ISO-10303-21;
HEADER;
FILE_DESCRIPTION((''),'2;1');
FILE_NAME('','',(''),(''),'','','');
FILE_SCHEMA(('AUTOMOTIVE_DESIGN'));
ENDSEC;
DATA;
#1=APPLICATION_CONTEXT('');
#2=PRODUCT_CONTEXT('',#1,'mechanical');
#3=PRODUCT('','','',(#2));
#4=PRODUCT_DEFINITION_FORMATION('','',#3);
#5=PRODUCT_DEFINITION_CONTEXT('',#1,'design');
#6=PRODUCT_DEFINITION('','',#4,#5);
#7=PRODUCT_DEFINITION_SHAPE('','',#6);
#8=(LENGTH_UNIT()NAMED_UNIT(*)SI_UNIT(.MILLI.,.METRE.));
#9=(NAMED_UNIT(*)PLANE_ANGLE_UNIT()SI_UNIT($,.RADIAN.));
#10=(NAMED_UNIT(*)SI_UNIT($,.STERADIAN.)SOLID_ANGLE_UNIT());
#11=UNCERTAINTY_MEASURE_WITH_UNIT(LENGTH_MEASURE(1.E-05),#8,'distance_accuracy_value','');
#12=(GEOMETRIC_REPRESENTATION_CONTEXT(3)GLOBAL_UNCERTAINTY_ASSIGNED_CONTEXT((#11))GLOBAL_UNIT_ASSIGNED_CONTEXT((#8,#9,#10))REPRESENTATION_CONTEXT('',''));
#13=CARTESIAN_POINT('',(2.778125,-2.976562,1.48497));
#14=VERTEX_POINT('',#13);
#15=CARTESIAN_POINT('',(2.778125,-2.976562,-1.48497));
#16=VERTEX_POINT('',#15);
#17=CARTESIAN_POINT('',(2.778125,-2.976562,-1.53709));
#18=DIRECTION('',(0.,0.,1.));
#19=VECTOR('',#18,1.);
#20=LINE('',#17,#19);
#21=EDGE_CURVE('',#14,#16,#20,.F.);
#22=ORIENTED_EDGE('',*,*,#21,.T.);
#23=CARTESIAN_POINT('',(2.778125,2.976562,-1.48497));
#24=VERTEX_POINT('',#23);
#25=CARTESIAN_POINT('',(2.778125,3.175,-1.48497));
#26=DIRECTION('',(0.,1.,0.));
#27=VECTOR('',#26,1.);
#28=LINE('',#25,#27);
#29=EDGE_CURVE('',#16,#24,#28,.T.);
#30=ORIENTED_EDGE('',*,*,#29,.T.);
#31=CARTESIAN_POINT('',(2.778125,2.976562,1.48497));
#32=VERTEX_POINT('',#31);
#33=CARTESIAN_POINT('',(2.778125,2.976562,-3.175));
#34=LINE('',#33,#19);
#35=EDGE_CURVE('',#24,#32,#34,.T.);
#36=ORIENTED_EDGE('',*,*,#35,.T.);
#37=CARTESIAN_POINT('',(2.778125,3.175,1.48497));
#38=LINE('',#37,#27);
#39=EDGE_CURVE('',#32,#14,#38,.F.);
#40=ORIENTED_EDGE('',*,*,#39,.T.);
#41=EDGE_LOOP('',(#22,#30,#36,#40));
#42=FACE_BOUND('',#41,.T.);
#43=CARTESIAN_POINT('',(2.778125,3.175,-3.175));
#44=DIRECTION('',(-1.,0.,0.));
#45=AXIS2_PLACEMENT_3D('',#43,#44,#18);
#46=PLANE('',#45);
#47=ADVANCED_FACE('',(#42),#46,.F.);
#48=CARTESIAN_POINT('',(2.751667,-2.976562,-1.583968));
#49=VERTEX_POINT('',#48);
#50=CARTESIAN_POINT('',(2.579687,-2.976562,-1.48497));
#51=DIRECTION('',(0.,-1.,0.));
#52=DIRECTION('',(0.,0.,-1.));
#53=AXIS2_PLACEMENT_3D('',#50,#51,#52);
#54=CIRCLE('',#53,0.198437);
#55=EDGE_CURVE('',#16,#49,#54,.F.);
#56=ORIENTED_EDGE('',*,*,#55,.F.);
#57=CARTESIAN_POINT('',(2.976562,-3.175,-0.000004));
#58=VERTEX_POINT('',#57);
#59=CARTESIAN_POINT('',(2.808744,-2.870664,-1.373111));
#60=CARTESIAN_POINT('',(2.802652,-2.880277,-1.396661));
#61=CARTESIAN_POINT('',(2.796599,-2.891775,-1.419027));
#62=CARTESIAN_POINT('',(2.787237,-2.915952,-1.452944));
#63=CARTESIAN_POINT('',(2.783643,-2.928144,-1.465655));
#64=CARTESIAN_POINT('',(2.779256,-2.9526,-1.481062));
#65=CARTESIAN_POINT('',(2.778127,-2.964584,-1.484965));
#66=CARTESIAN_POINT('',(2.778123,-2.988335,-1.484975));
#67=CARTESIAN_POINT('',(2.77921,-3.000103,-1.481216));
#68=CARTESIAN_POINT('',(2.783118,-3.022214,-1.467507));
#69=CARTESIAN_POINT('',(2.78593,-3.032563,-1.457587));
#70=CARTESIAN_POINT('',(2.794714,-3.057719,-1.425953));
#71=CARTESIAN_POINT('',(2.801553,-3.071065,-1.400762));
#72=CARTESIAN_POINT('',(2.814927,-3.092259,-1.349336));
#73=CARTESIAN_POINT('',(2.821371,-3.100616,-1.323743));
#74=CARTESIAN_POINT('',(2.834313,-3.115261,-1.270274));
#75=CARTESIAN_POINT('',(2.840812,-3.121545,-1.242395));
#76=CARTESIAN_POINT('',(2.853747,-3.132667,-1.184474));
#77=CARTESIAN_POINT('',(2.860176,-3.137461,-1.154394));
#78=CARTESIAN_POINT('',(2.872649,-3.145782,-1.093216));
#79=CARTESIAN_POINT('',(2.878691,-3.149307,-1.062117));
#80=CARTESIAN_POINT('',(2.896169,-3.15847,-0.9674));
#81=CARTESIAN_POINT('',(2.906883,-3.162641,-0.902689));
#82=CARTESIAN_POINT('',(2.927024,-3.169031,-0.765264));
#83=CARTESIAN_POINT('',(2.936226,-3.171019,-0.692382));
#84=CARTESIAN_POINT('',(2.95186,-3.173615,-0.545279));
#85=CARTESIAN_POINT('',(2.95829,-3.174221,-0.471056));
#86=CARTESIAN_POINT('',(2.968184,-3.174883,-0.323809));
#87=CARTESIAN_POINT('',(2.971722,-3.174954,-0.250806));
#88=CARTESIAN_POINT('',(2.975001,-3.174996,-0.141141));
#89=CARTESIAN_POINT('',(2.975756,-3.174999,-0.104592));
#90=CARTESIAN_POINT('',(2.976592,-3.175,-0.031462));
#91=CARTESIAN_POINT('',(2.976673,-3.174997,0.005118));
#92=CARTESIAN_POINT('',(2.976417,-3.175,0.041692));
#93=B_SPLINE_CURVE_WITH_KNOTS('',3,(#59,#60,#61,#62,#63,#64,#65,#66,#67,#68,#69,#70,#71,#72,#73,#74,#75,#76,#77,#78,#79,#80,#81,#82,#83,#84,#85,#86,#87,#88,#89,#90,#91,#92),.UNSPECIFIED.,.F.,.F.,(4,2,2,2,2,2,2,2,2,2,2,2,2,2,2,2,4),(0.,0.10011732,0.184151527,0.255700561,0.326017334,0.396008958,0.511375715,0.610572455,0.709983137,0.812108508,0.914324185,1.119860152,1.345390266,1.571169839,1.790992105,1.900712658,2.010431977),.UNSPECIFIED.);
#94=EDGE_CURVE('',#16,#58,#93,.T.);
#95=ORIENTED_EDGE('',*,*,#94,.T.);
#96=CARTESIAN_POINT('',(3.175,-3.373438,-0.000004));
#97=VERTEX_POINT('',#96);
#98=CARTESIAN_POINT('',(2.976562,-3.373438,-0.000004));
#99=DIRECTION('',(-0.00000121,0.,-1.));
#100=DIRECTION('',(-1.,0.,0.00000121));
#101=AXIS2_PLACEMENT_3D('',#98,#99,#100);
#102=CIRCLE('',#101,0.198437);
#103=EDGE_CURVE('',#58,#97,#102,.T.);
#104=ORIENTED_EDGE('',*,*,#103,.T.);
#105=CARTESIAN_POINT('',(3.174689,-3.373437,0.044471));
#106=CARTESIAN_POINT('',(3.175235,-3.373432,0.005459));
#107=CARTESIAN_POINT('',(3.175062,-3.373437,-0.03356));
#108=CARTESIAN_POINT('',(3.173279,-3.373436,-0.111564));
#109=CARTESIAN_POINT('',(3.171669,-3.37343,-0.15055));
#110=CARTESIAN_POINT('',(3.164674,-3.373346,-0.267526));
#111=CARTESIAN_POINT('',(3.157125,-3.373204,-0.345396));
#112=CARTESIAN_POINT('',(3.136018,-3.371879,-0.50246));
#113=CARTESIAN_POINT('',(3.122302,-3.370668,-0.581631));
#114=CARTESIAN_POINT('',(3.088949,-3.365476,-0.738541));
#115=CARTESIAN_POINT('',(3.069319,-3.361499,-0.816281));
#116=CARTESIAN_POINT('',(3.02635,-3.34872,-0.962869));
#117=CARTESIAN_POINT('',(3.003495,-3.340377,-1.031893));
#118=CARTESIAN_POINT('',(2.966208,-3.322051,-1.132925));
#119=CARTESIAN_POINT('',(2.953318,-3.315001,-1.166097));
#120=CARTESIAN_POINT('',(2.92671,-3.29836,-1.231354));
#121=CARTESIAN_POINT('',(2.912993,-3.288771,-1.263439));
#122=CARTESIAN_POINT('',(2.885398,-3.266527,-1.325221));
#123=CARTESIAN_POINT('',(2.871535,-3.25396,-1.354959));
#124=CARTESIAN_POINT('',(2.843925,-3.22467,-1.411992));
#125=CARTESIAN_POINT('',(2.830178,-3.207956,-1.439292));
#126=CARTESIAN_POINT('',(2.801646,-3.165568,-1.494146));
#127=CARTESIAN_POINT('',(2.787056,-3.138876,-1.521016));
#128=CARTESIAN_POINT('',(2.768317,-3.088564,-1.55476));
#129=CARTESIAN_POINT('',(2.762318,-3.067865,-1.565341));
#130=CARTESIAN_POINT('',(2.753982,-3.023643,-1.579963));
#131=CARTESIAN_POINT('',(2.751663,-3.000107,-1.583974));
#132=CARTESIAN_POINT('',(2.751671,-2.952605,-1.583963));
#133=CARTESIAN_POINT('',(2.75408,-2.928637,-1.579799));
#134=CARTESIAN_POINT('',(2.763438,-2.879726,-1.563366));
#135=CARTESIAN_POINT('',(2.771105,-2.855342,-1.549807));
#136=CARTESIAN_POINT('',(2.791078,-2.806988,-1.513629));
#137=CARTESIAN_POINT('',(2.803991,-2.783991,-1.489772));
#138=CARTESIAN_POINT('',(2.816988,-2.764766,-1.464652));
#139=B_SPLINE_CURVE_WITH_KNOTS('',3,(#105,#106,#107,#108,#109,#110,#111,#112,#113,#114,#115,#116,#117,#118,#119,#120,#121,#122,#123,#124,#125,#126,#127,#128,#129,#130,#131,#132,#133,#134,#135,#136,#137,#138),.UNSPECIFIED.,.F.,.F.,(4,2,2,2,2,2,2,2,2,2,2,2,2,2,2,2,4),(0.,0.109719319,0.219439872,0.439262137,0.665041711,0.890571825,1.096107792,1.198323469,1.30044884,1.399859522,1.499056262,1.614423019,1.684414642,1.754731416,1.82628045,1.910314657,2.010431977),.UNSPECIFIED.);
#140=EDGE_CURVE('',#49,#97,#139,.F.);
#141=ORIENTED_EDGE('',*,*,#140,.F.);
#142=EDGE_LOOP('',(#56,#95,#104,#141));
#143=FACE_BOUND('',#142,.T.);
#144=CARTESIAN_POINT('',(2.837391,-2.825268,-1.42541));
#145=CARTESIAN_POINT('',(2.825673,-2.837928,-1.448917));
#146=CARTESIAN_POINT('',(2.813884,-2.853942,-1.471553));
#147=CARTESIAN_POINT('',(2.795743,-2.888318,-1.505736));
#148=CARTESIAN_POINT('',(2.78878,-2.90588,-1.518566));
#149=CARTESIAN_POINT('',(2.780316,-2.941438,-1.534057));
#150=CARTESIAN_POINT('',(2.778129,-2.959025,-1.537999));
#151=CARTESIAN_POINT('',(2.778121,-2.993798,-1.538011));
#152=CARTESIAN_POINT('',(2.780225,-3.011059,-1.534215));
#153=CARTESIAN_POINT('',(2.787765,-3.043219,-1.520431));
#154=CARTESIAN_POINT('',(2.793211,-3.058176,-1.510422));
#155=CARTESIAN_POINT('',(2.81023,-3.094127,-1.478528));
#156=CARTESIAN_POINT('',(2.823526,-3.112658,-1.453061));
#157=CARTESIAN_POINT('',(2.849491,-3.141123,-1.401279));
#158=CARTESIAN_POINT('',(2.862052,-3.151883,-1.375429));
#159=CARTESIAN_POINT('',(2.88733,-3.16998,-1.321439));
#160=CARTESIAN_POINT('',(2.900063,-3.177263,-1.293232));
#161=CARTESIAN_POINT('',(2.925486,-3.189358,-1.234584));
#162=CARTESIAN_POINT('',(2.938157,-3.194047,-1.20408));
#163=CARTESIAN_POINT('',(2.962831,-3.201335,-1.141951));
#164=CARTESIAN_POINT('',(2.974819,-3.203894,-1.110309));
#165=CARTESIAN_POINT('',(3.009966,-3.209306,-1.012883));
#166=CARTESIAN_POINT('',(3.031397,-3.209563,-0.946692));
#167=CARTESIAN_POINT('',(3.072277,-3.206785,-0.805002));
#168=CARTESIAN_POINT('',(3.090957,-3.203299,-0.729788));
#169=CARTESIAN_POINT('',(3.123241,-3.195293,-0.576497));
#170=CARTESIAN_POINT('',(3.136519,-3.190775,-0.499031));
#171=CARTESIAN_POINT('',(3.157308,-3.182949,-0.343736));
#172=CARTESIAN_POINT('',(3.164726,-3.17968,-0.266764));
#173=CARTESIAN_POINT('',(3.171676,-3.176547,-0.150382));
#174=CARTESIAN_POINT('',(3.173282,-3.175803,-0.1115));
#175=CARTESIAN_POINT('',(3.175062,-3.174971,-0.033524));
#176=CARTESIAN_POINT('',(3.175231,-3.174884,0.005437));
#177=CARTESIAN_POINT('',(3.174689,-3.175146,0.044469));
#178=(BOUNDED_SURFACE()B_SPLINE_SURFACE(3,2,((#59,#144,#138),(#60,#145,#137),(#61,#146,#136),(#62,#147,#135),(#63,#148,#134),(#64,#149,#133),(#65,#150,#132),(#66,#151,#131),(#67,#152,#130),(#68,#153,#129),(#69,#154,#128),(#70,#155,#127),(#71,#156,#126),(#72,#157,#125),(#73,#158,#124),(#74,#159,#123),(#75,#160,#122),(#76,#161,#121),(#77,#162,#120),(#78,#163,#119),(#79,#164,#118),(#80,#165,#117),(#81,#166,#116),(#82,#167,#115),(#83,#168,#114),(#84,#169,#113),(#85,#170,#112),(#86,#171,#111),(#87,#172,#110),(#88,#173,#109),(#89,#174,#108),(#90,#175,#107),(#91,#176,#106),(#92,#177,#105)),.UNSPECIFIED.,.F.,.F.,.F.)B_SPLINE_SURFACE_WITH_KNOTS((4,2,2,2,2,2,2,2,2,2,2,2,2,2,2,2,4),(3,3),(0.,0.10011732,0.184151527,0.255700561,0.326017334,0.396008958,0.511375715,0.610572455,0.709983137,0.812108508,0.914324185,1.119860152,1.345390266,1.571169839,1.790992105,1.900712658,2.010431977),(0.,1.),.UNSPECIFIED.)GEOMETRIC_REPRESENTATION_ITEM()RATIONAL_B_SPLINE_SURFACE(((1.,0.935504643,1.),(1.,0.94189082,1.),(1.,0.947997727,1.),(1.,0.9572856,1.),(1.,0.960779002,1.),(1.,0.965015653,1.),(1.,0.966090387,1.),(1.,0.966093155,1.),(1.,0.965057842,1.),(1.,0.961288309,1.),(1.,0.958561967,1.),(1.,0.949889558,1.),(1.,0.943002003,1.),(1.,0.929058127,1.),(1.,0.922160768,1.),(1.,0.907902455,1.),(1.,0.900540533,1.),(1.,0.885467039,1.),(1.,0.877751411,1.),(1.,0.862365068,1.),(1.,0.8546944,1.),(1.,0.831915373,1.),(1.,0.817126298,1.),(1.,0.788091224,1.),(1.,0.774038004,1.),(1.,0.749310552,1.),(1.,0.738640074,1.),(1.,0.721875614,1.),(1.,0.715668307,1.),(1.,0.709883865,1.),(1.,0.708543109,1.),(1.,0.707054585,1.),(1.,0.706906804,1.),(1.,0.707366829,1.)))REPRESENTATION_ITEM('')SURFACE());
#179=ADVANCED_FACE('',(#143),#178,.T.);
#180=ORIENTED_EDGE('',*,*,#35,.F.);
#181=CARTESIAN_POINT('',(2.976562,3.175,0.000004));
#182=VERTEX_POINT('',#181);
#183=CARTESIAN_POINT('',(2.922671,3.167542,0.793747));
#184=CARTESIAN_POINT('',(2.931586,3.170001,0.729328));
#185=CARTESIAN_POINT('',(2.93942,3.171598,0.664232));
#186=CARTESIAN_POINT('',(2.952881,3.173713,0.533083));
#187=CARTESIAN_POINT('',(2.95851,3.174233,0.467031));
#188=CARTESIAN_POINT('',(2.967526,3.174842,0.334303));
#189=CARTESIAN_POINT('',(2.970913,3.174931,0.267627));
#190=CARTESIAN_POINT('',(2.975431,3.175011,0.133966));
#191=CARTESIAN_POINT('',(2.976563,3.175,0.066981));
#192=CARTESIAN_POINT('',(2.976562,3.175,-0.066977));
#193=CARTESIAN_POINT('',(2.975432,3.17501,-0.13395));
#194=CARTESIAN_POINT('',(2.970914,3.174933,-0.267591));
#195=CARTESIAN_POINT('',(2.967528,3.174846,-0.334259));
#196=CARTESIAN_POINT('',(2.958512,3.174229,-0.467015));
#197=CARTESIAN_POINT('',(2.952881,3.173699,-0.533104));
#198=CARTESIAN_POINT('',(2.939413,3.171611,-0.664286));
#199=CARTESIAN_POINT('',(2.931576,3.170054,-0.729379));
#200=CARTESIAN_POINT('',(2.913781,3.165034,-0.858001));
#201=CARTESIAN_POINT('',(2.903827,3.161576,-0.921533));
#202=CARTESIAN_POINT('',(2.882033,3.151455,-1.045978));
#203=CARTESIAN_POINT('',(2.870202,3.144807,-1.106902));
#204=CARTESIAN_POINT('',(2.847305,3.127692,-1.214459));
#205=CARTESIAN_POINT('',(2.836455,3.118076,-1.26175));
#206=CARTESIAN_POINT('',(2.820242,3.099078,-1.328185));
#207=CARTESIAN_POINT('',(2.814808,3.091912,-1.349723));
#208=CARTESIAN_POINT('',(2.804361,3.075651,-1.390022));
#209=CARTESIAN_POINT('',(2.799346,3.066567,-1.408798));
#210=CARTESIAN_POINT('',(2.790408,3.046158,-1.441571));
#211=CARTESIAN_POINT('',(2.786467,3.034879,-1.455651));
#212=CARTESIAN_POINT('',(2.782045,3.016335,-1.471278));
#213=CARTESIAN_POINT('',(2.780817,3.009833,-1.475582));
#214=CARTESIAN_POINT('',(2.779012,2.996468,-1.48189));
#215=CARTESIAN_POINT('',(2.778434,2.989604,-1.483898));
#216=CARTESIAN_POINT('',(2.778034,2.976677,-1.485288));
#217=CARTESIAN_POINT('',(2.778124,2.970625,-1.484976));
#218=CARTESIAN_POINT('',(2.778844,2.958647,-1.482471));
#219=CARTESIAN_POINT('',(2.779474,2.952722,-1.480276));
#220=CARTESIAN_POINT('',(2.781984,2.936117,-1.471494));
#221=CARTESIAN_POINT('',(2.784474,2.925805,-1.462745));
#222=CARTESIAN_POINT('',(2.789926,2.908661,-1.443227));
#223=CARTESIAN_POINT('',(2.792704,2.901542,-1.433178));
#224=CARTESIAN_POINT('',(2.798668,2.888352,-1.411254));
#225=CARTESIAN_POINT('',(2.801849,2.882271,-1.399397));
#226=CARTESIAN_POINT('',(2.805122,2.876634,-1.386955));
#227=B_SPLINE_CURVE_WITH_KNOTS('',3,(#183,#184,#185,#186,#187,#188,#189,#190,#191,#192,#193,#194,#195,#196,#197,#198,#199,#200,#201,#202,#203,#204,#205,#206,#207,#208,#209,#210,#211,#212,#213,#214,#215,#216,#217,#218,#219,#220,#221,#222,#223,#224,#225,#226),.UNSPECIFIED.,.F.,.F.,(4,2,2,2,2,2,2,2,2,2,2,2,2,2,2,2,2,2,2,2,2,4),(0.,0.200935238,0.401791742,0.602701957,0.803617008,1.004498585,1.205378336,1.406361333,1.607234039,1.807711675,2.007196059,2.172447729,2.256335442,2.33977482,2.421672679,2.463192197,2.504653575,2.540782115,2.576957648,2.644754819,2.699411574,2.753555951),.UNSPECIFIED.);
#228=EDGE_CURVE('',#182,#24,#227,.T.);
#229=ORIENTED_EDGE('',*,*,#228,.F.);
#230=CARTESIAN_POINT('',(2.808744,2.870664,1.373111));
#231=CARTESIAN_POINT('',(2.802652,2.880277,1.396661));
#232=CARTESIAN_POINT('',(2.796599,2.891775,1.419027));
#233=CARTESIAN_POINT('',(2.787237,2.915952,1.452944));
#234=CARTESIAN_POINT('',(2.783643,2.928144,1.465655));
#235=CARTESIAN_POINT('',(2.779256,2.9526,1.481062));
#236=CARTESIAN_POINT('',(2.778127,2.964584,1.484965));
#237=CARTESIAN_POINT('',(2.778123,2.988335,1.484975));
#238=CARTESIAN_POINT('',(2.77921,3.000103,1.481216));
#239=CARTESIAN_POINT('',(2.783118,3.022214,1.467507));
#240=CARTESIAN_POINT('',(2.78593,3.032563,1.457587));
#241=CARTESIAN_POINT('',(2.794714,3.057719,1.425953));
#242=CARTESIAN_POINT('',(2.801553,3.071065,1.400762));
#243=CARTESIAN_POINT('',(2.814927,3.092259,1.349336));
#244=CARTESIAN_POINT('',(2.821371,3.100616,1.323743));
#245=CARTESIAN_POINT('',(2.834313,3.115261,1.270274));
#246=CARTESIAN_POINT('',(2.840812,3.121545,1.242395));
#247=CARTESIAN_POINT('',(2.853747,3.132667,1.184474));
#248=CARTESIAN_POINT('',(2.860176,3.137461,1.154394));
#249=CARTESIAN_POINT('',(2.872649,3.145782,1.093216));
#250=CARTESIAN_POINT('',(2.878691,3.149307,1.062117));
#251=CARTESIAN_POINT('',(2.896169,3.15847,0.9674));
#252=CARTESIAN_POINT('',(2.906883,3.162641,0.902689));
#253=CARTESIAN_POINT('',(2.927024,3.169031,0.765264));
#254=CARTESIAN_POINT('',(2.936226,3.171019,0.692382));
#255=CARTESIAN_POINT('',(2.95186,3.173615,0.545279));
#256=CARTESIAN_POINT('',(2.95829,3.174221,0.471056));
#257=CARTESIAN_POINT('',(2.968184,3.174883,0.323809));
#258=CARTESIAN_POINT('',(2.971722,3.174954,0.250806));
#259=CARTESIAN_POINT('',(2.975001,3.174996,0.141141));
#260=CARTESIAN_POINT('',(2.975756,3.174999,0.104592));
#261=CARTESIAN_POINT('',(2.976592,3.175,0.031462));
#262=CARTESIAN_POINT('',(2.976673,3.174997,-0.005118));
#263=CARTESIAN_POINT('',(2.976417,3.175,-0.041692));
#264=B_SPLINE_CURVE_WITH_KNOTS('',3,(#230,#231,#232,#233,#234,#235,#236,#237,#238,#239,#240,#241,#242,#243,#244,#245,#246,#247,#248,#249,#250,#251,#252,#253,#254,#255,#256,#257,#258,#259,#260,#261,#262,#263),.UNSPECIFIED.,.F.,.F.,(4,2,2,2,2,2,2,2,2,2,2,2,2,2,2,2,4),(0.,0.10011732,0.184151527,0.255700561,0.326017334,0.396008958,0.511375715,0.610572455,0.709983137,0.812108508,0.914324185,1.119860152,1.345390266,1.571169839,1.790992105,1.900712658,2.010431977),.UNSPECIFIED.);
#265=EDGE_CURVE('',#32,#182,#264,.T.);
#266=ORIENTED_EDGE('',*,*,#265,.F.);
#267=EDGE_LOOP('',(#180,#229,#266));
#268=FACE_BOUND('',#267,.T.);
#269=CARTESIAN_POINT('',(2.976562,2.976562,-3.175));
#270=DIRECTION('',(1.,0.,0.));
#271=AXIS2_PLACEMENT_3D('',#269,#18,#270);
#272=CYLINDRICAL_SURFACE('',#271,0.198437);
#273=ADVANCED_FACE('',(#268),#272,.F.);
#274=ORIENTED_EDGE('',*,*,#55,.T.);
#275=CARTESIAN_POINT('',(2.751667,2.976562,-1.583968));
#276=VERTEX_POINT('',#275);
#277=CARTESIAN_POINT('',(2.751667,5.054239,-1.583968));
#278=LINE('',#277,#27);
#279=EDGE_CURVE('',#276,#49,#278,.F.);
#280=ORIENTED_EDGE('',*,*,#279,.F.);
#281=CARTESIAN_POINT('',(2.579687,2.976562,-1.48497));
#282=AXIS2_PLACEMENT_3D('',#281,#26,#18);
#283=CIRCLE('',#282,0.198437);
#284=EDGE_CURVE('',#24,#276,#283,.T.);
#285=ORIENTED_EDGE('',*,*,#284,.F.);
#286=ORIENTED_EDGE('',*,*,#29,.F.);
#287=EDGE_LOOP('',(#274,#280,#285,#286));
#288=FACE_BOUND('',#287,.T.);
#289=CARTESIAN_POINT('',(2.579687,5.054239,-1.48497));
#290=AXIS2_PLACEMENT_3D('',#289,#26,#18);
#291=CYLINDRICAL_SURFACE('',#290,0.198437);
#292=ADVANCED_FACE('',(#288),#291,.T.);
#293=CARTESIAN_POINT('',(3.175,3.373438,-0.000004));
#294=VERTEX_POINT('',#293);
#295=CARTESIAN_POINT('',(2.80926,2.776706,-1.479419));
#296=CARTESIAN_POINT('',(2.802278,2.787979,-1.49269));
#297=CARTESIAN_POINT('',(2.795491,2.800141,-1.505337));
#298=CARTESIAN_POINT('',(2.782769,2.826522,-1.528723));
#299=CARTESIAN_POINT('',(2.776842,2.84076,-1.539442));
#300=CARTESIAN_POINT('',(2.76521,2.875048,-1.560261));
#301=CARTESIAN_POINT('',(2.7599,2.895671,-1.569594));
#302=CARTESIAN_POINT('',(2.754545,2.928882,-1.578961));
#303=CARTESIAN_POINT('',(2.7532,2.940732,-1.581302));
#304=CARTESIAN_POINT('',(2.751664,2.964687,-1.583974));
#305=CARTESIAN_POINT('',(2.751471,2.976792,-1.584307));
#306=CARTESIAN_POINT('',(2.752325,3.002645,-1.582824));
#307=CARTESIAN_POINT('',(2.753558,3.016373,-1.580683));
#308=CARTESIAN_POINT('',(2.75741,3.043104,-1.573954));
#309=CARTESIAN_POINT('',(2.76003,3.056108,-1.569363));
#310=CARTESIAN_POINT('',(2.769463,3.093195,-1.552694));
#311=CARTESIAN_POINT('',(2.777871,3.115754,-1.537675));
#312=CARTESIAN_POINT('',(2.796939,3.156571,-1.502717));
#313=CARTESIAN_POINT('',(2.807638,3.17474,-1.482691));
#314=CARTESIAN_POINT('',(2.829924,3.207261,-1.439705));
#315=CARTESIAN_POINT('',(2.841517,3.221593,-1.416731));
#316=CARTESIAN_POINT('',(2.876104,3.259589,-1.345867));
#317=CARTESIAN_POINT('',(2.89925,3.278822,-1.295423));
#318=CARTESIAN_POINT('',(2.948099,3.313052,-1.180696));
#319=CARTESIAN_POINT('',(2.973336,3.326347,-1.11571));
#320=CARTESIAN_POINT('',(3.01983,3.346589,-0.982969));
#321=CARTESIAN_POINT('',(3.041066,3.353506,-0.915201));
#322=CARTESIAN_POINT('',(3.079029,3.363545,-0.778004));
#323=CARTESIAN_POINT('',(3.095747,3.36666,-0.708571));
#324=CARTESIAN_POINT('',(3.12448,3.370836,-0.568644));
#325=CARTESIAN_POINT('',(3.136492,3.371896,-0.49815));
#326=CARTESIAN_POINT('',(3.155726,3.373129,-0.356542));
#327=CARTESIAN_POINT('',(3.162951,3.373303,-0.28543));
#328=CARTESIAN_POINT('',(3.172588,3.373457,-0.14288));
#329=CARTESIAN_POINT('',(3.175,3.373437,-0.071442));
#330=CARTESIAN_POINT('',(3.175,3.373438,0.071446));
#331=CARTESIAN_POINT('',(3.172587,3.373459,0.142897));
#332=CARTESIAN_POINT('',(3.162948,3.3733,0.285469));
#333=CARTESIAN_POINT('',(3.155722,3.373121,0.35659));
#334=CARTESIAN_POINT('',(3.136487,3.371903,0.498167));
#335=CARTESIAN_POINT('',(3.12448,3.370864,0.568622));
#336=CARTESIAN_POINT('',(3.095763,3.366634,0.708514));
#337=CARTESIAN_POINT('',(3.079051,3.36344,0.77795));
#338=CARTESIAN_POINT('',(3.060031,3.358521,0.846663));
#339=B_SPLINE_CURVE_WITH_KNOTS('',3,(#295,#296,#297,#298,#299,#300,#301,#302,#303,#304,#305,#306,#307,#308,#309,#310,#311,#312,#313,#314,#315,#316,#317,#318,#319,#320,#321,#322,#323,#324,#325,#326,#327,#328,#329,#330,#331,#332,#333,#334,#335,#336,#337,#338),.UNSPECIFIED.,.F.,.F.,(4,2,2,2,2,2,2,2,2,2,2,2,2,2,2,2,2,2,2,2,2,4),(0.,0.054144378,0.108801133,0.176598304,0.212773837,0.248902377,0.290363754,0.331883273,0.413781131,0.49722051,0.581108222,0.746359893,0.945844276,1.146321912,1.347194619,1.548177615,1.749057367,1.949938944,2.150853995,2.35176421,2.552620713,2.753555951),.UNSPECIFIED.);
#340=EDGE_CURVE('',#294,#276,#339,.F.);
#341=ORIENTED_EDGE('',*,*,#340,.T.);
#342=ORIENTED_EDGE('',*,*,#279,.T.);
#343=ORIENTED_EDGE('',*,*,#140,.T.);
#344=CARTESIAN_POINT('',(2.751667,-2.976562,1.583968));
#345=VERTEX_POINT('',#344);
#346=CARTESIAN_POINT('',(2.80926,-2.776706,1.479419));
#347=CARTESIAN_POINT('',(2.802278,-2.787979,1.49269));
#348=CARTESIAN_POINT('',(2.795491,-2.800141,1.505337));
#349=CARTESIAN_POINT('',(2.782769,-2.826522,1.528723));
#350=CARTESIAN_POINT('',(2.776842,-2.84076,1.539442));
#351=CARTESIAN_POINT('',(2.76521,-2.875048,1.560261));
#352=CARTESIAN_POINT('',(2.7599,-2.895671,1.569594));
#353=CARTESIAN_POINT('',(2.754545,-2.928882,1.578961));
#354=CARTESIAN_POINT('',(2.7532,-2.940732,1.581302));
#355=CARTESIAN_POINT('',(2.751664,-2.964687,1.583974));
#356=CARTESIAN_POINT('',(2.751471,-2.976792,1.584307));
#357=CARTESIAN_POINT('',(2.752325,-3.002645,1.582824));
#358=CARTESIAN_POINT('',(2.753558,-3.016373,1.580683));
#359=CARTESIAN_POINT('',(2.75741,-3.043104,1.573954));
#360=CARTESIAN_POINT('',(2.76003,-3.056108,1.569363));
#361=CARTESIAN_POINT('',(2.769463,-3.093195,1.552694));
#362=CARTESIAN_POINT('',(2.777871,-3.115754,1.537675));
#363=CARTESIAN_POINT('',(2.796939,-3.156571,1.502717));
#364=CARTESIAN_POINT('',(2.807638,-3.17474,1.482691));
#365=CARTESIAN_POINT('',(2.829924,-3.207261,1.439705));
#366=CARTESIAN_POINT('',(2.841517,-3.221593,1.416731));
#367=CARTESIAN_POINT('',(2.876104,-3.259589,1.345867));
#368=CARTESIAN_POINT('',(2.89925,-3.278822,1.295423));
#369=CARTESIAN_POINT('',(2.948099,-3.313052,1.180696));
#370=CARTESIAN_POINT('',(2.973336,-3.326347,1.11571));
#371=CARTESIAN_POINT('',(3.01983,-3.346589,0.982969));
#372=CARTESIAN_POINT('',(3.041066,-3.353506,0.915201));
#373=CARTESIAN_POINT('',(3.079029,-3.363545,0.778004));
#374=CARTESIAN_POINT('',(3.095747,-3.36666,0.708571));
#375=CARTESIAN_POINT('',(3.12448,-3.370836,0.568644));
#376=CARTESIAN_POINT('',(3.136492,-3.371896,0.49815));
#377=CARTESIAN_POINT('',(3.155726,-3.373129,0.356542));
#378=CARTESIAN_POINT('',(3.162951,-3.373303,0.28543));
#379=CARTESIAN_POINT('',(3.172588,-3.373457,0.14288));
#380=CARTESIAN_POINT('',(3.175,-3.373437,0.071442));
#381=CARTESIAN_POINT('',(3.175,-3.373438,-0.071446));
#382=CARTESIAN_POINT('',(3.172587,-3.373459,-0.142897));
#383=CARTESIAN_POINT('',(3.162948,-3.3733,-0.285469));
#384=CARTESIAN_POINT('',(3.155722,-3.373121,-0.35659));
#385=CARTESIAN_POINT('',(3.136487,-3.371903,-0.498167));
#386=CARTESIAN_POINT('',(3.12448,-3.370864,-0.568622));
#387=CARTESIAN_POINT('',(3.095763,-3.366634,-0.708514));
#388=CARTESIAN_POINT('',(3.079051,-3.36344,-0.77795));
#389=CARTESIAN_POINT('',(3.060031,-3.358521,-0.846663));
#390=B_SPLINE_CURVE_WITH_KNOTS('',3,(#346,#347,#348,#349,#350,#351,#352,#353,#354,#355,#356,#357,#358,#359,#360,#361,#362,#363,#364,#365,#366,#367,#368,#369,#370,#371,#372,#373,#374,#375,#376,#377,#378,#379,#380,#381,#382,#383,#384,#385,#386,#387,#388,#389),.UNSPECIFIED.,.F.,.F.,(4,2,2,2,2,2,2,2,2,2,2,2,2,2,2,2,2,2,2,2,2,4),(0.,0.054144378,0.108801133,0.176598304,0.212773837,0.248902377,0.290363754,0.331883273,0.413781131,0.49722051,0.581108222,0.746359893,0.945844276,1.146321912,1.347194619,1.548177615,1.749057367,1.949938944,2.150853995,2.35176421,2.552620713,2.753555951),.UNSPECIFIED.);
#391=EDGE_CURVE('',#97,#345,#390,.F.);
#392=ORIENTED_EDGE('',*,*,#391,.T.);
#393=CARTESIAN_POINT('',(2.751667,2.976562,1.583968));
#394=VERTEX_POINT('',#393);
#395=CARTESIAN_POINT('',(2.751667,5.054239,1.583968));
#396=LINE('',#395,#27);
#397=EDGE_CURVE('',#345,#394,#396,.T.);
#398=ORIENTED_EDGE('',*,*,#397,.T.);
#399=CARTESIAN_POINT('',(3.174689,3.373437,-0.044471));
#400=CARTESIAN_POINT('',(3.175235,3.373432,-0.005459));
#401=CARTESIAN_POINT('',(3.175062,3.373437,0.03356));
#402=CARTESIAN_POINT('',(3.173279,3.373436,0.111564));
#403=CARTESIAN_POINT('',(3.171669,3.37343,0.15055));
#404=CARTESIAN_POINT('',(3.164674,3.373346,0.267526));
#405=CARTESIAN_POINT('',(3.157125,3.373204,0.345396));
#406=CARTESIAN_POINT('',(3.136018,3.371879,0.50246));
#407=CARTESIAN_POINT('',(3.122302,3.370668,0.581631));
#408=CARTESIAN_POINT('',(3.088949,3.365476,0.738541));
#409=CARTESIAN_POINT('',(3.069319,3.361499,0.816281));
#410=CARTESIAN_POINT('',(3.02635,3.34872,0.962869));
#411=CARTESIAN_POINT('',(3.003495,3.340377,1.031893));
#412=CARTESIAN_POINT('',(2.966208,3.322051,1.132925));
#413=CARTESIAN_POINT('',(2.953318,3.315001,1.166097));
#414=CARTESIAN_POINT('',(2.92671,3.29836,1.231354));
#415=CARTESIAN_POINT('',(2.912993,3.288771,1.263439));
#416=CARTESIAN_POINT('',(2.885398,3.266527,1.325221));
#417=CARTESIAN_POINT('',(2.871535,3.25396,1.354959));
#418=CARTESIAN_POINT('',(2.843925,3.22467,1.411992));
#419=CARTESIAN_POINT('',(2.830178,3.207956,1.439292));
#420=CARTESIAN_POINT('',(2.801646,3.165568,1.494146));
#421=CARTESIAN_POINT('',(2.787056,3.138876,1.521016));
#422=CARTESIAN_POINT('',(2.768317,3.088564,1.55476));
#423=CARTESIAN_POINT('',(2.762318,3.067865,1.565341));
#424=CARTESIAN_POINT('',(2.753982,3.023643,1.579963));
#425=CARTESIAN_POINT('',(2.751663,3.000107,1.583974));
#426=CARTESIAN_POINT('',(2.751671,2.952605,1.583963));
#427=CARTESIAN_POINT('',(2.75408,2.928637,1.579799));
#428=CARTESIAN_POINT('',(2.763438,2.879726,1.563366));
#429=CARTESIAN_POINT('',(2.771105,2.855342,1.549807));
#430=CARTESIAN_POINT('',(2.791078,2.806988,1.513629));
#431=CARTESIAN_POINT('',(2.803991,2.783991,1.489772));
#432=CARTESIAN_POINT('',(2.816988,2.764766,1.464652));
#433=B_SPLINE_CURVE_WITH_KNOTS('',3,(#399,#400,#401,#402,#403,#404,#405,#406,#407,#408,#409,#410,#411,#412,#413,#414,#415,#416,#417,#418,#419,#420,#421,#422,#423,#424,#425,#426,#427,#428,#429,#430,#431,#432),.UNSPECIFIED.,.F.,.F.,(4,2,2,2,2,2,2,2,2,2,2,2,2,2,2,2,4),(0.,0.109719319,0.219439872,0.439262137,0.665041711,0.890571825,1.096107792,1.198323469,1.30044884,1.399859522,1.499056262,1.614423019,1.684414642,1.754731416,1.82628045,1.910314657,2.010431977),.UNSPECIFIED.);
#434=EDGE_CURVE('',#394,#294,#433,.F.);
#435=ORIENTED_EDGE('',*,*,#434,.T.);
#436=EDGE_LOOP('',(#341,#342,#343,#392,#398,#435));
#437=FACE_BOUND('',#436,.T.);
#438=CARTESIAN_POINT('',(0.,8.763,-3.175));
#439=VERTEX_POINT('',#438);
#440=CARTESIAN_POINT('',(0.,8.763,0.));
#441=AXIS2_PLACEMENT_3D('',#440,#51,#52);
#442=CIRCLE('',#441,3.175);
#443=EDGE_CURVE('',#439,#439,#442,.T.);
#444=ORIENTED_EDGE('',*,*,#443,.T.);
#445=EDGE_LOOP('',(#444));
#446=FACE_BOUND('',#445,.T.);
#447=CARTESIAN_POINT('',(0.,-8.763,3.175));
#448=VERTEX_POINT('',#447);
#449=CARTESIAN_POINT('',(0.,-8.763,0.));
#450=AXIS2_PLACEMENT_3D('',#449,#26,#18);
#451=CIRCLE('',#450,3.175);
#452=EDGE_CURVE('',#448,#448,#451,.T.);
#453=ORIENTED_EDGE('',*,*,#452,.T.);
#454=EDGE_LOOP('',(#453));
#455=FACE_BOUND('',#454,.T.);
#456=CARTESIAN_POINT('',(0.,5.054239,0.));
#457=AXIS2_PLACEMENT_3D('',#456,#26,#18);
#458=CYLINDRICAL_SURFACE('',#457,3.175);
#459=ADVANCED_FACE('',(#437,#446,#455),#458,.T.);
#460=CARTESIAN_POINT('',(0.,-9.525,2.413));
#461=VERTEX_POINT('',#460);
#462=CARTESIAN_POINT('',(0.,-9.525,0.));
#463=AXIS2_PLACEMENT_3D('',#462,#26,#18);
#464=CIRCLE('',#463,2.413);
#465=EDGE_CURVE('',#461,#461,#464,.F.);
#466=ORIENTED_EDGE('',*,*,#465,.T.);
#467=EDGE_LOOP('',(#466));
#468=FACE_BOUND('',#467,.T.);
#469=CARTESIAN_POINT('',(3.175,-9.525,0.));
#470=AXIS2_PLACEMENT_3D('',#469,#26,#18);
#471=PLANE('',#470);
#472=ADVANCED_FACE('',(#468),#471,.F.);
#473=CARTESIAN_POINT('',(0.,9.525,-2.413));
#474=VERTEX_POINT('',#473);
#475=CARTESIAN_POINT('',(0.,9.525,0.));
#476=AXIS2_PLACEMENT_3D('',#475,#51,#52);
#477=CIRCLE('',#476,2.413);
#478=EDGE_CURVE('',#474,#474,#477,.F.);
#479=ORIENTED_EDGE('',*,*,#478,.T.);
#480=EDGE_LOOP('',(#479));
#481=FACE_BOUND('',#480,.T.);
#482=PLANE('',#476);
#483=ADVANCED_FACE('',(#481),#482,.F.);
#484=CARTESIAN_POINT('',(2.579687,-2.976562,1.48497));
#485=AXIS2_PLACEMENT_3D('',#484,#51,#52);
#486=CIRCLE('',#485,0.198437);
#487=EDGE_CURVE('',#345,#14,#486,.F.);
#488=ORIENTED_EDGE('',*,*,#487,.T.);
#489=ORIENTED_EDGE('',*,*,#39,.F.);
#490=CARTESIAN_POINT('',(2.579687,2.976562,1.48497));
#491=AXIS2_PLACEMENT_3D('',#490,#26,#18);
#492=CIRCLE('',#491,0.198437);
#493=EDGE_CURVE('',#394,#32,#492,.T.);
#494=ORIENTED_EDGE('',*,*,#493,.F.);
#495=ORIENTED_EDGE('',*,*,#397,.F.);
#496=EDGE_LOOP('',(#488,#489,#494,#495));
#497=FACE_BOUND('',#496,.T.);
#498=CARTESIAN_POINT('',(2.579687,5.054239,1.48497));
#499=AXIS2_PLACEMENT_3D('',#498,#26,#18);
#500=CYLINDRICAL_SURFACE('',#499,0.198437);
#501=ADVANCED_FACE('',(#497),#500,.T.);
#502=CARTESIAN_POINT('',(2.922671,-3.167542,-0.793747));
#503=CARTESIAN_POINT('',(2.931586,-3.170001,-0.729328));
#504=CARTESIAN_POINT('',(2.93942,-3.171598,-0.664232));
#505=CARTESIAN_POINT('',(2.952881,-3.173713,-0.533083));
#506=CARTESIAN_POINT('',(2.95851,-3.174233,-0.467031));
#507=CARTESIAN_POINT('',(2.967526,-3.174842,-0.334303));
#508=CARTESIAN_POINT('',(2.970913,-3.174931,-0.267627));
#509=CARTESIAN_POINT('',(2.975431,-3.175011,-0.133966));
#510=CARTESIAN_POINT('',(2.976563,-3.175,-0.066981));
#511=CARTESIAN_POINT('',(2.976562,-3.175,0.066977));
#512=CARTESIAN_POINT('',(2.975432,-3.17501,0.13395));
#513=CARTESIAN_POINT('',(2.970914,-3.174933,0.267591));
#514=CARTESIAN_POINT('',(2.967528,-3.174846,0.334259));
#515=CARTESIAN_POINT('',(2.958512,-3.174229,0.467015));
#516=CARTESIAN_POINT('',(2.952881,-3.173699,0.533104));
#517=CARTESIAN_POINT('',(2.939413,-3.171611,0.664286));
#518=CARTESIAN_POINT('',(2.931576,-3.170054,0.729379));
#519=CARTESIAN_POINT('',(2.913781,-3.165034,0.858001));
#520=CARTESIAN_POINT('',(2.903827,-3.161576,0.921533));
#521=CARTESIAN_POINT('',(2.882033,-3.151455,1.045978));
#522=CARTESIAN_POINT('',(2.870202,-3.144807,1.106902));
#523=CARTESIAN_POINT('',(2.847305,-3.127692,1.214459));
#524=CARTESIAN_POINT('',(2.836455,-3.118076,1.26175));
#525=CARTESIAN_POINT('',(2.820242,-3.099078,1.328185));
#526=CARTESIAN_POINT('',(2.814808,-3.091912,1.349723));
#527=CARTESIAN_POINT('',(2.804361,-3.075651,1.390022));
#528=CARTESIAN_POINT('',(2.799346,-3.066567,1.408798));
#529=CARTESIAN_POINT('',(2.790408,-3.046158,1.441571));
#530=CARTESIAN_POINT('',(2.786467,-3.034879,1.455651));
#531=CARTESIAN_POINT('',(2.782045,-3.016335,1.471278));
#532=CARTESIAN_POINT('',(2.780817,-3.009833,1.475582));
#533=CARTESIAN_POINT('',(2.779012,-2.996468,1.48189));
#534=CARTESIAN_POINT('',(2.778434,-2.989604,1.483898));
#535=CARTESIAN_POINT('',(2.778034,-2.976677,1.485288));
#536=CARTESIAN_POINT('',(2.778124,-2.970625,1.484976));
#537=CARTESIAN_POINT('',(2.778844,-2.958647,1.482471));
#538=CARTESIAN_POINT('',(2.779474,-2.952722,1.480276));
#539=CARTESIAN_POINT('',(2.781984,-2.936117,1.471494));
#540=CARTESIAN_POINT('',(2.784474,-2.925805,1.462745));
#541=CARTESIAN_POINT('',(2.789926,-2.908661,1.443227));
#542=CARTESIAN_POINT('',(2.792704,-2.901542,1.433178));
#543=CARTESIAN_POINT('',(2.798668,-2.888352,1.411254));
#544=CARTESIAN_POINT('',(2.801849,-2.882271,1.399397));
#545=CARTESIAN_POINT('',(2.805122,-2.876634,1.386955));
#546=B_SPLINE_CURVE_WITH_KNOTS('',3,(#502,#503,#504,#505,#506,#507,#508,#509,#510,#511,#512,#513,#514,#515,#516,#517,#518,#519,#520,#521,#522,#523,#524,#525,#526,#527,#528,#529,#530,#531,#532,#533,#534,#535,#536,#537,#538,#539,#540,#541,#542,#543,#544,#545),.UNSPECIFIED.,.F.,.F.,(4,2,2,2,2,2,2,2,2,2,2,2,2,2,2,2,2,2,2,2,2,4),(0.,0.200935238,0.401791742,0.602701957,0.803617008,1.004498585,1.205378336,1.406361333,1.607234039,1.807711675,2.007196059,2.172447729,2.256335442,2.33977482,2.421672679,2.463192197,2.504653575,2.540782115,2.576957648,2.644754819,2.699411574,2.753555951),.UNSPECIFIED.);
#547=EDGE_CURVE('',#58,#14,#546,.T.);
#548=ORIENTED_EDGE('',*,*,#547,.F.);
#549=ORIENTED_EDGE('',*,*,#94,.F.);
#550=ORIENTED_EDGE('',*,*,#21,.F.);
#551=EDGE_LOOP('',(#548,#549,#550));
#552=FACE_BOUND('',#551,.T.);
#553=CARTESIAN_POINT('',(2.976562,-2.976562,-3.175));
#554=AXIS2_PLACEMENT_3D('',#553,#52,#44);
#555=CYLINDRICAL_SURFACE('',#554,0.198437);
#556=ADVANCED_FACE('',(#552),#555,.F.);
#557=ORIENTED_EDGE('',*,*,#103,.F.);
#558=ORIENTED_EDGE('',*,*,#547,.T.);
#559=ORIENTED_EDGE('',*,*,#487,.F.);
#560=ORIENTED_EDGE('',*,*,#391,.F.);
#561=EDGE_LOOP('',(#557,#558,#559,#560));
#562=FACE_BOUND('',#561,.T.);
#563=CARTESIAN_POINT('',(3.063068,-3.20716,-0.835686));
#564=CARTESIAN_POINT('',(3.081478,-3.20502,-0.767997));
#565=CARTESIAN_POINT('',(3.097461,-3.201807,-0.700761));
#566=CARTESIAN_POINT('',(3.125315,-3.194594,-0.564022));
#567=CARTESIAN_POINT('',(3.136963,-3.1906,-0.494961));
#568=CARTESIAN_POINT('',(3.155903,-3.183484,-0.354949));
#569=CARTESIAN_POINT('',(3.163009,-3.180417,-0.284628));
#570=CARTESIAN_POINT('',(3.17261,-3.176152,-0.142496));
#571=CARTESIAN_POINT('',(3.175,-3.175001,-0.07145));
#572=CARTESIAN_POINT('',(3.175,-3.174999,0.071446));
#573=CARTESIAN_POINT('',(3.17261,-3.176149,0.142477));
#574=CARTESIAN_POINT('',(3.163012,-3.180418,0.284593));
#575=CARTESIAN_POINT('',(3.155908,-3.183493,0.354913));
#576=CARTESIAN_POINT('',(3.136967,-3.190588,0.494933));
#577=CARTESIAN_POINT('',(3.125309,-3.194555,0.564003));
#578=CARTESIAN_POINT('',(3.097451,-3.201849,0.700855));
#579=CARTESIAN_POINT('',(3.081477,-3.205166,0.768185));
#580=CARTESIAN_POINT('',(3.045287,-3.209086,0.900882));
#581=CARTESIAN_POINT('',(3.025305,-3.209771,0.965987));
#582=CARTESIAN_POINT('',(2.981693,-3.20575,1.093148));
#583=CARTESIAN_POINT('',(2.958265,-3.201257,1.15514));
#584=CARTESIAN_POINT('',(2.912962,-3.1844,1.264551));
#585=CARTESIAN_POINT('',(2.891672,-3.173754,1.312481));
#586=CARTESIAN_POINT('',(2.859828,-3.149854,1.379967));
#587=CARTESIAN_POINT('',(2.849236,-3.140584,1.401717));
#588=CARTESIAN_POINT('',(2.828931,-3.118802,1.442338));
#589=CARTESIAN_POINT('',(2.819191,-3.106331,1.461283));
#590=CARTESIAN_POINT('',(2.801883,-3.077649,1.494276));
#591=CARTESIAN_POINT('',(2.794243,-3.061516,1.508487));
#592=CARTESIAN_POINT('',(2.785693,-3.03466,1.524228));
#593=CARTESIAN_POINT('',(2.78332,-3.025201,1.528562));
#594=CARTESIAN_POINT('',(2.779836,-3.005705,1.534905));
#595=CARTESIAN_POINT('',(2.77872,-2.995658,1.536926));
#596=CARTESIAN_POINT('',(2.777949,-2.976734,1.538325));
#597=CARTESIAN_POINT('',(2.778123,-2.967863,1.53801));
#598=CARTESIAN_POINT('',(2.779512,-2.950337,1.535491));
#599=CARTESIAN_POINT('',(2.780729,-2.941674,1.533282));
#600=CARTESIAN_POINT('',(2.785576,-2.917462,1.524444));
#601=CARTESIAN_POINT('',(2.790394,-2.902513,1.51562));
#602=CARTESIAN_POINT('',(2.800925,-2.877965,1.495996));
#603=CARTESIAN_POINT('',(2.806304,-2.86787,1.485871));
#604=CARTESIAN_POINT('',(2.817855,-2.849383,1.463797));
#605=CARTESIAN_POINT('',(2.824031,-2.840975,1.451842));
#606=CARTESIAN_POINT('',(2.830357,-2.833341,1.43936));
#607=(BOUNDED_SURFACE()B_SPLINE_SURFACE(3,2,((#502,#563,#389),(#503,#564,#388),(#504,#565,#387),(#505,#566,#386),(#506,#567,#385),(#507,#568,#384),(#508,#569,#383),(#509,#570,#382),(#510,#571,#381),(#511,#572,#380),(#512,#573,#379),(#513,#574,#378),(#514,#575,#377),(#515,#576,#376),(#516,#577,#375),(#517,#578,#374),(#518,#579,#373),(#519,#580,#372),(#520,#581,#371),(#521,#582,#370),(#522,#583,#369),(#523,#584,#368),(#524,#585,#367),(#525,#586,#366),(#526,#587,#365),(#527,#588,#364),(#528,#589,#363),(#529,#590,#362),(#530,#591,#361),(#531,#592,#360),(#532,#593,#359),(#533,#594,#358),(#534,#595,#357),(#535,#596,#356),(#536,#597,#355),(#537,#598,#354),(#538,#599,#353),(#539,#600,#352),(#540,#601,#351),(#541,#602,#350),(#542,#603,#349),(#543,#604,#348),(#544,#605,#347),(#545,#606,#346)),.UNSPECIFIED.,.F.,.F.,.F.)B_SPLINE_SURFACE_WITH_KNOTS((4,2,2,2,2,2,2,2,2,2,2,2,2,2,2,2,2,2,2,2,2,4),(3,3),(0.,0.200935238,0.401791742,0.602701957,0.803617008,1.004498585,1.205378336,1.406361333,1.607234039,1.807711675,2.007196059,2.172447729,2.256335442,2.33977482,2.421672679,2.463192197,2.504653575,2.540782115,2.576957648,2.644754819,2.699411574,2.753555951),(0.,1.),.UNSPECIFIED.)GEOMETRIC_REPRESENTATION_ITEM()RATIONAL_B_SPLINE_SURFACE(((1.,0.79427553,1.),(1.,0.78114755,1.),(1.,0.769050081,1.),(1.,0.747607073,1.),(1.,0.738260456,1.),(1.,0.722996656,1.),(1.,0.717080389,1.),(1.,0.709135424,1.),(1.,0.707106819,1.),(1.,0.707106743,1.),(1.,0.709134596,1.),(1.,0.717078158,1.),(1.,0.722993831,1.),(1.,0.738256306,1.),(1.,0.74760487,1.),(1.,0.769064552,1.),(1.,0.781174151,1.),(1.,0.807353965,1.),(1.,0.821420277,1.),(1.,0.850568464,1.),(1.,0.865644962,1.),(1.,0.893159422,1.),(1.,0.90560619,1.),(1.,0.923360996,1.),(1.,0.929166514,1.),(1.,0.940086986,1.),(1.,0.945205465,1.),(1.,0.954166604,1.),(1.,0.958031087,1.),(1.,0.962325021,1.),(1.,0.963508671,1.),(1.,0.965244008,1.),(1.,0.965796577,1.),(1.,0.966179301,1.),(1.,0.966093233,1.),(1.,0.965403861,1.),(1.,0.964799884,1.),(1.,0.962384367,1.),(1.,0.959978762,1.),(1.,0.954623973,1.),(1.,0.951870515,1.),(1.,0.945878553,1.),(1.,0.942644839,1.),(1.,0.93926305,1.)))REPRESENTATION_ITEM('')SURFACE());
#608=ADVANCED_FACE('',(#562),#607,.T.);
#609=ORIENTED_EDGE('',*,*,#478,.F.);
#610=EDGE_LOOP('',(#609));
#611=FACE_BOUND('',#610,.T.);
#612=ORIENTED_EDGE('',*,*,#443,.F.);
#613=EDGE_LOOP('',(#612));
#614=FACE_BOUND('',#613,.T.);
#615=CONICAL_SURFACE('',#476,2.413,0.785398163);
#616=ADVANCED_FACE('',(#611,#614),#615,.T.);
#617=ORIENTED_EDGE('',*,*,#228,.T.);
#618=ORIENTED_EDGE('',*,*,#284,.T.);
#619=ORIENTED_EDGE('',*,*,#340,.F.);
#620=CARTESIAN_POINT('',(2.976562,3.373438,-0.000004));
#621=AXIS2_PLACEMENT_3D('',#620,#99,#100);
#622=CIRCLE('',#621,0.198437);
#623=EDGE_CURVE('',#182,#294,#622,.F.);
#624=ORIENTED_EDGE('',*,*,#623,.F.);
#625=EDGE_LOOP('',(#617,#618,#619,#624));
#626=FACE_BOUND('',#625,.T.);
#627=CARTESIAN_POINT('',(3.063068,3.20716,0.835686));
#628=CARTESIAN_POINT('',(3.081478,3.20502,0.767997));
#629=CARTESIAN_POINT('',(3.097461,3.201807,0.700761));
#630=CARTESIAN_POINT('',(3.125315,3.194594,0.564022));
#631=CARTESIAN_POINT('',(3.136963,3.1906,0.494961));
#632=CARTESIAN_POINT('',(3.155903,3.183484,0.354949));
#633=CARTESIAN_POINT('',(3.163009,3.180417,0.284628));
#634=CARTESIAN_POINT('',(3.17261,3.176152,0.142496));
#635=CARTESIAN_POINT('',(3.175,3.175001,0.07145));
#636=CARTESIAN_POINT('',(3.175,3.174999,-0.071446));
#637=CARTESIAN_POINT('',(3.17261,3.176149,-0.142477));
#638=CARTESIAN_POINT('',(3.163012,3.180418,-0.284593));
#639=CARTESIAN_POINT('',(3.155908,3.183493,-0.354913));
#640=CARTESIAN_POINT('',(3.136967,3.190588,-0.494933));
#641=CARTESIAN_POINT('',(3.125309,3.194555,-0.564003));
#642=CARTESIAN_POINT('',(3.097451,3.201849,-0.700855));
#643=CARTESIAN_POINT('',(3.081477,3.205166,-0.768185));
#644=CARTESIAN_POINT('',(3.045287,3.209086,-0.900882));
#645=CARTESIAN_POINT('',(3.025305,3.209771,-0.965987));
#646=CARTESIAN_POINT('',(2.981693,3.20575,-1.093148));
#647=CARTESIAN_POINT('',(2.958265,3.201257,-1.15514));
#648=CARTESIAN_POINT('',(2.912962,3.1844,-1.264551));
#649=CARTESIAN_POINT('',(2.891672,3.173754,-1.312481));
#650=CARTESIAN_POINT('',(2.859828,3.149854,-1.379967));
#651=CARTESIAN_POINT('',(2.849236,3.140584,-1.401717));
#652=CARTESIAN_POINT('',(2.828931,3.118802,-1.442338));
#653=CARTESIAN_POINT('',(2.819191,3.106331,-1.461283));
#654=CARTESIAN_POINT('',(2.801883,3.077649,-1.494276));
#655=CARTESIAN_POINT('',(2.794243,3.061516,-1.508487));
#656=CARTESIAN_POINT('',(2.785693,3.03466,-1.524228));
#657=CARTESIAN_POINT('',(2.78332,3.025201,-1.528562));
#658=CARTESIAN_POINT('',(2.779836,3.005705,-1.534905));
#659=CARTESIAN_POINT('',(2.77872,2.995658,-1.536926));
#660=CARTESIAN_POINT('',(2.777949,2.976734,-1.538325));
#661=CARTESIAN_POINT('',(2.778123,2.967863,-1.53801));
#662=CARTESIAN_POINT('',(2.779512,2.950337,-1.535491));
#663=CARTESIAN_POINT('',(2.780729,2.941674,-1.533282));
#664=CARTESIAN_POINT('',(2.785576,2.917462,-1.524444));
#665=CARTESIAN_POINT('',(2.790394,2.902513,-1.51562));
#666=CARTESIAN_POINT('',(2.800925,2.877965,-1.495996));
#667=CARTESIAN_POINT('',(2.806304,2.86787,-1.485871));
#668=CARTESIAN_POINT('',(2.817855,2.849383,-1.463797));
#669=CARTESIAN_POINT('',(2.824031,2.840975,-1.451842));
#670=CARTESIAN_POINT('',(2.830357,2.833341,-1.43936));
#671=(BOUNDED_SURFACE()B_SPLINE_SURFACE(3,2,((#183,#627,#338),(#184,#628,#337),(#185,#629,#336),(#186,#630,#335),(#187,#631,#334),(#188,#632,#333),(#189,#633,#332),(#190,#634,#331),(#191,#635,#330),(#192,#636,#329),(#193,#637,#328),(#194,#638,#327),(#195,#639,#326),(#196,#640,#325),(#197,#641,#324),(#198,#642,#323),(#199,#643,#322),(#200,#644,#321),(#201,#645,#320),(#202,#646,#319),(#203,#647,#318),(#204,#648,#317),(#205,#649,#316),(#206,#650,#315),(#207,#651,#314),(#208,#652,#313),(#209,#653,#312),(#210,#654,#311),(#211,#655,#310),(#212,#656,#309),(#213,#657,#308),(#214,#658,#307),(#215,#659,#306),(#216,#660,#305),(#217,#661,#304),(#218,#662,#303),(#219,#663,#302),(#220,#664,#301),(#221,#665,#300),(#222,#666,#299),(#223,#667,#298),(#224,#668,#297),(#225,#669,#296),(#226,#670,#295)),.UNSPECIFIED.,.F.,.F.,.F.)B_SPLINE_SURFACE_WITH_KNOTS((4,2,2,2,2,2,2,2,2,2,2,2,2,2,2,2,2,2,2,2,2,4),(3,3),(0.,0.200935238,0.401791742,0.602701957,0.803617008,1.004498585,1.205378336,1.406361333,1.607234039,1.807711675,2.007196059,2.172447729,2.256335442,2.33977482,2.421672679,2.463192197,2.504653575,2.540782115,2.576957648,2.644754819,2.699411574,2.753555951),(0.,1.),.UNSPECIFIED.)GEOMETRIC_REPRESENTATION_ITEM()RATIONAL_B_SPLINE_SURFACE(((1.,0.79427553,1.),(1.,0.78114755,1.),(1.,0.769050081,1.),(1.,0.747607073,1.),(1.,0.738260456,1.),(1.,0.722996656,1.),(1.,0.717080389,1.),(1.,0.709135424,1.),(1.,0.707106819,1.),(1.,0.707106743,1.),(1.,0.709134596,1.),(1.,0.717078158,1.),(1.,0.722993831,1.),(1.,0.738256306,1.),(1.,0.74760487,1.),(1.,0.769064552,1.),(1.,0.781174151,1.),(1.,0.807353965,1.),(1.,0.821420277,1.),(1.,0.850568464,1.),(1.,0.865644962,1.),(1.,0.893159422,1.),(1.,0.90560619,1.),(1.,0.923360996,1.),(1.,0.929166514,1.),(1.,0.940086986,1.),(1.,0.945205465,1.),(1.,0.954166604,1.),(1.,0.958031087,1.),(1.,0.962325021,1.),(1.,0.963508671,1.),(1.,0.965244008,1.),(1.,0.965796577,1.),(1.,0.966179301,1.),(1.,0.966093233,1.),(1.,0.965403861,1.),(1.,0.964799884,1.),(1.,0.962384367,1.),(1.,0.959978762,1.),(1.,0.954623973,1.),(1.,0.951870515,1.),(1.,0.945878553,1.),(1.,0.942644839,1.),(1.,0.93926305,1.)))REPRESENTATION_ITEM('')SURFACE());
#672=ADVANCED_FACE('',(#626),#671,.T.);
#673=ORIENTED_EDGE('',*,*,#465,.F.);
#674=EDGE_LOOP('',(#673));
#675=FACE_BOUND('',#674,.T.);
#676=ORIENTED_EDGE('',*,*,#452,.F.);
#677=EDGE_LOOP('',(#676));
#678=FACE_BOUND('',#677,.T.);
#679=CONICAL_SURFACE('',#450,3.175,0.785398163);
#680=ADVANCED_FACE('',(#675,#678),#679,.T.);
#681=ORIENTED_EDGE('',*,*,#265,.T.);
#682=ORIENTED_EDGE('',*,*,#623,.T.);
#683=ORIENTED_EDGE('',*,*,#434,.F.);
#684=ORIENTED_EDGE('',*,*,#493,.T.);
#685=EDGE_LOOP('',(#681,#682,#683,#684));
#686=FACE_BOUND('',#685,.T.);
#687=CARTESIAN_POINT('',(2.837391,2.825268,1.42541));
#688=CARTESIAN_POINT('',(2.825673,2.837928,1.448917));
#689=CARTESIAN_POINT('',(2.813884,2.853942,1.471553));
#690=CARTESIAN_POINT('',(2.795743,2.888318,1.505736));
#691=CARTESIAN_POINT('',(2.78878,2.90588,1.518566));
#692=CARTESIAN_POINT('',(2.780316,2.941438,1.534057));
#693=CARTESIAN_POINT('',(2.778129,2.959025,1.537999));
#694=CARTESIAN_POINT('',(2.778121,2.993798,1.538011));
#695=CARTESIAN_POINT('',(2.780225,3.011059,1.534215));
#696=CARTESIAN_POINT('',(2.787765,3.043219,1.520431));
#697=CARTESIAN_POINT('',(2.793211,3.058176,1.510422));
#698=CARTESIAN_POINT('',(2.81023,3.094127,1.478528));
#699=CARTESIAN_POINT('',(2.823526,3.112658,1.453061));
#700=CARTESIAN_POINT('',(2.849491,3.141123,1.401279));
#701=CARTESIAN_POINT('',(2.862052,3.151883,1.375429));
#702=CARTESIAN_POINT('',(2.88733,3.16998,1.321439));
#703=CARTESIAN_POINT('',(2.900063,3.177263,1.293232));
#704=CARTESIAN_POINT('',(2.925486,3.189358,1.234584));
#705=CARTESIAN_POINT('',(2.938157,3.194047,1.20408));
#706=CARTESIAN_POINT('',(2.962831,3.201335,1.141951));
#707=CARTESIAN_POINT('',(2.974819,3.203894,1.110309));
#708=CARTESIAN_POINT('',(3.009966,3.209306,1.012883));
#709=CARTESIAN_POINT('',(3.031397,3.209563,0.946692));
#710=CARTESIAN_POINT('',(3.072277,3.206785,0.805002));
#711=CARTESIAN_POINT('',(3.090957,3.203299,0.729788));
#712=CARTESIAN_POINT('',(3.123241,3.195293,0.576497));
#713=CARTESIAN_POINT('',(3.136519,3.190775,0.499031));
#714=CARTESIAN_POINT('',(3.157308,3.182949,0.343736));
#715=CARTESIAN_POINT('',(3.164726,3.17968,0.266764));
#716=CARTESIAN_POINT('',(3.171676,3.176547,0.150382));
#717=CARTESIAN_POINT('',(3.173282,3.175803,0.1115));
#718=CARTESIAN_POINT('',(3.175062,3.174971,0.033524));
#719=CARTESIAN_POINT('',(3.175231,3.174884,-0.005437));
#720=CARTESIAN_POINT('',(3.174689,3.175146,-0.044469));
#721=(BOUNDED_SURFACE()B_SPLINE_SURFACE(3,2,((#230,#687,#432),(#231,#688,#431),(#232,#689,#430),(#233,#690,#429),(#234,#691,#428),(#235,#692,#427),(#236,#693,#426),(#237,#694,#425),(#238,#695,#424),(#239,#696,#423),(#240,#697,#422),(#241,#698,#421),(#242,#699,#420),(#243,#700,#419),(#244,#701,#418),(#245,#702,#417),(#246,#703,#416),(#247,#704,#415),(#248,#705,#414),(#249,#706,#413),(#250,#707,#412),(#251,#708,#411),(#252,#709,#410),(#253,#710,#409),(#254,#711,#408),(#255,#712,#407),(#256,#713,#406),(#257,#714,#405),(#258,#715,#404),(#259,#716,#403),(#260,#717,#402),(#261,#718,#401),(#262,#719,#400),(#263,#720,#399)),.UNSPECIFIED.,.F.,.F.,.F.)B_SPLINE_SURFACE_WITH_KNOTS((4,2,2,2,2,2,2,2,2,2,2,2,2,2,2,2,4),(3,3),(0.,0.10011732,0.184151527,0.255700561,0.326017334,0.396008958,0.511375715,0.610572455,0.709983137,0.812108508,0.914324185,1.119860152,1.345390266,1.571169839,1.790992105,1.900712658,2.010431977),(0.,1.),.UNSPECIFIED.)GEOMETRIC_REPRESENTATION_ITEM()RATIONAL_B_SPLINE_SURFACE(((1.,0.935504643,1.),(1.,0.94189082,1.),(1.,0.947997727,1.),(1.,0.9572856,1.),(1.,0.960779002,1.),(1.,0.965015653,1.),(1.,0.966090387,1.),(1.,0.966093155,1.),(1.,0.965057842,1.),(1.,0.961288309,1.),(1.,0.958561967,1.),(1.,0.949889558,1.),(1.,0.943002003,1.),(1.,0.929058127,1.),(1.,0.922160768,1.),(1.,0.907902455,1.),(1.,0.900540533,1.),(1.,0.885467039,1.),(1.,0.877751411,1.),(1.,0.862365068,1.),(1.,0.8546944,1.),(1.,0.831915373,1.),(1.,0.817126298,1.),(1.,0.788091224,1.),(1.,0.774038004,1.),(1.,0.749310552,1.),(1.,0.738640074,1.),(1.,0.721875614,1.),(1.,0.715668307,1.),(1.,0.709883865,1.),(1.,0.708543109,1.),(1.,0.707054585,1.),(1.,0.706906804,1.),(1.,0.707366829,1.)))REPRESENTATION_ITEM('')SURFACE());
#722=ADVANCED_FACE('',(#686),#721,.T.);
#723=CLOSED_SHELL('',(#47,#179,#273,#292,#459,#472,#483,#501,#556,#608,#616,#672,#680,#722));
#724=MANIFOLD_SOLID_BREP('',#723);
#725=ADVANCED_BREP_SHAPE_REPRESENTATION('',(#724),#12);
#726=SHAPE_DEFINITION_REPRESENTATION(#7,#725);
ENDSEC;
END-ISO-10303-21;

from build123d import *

# Parameters (mm, degrees)
SKETCH1_W               = 3.175
SKETCH1_H               = 19.05
CUT_EXTRUDE2_DEPTH      = 11.530283709
CUT_EXTRUDE2_DEPTH_BACK = 11.530283709
SKETCH3_W               = 0.396875
SKETCH3_H               = 6.35
FILLET3_R               = 0.1984375
CHAMFER1_SIZE           = 0.762


with BuildPart() as part:
    # Sketch1 → Revolve1 (revolve)
    with BuildSketch(Plane.XY, mode=Mode.PRIVATE) as revolve1_sk:
        with Locations((1.5875, 0)):
            Rectangle(SKETCH1_W, SKETCH1_H)
    revolve(revolve1_sk.sketch.rotate(Axis((0, 5.054239483, 0), (0, -1, 0)), 90), axis=Axis((0, 5.054239483, 0), (0, -1, 0)))

    # Sketch3 → Cut-Extrude2 (cut, two sides: drawn at the far end of the back side and taken through both)
    with BuildSketch(Plane.XY.offset(-CUT_EXTRUDE2_DEPTH_BACK)):
        with Locations((2.9765625, 0)):
            Rectangle(SKETCH3_W, SKETCH3_H)
    extrude(amount=CUT_EXTRUDE2_DEPTH + CUT_EXTRUDE2_DEPTH_BACK, mode=Mode.SUBTRACT)

    # Fillet3
    fillet3_edges = [part.edges().sort_by_distance(p)[0] for p in [
        (2.778125, -3.175, 0),
        (2.778125, 3.175, 0),
    ]]
    fillet(fillet3_edges, radius=FILLET3_R)
    fillet3_2_edges = [part.edges().sort_by_distance(p)[0] for p in [
        (2.778125, 0, 1.537090266),
        (2.778125, 0, -1.537090266),
        (2.842710111, 3.123058164, -1.414080692),
        (2.842706566, -3.123054925, -1.41408782),
        (2.842710111, 3.123058164, 1.414080692),
        (2.842706566, -3.123054925, 1.41408782),
    ]]
    fillet(fillet3_2_edges, radius=FILLET3_R - 0.0001)  # a hair under: the kernel refuses the full size

    # Chamfer1
    chamfer1_edges = [part.edges().sort_by_distance(p)[0] for p in [
        (0, -9.525, -3.175),
        (0, 9.525, -3.175),
    ]]
    chamfer(chamfer1_edges, length=CHAMFER1_SIZE)


solid = part.part
